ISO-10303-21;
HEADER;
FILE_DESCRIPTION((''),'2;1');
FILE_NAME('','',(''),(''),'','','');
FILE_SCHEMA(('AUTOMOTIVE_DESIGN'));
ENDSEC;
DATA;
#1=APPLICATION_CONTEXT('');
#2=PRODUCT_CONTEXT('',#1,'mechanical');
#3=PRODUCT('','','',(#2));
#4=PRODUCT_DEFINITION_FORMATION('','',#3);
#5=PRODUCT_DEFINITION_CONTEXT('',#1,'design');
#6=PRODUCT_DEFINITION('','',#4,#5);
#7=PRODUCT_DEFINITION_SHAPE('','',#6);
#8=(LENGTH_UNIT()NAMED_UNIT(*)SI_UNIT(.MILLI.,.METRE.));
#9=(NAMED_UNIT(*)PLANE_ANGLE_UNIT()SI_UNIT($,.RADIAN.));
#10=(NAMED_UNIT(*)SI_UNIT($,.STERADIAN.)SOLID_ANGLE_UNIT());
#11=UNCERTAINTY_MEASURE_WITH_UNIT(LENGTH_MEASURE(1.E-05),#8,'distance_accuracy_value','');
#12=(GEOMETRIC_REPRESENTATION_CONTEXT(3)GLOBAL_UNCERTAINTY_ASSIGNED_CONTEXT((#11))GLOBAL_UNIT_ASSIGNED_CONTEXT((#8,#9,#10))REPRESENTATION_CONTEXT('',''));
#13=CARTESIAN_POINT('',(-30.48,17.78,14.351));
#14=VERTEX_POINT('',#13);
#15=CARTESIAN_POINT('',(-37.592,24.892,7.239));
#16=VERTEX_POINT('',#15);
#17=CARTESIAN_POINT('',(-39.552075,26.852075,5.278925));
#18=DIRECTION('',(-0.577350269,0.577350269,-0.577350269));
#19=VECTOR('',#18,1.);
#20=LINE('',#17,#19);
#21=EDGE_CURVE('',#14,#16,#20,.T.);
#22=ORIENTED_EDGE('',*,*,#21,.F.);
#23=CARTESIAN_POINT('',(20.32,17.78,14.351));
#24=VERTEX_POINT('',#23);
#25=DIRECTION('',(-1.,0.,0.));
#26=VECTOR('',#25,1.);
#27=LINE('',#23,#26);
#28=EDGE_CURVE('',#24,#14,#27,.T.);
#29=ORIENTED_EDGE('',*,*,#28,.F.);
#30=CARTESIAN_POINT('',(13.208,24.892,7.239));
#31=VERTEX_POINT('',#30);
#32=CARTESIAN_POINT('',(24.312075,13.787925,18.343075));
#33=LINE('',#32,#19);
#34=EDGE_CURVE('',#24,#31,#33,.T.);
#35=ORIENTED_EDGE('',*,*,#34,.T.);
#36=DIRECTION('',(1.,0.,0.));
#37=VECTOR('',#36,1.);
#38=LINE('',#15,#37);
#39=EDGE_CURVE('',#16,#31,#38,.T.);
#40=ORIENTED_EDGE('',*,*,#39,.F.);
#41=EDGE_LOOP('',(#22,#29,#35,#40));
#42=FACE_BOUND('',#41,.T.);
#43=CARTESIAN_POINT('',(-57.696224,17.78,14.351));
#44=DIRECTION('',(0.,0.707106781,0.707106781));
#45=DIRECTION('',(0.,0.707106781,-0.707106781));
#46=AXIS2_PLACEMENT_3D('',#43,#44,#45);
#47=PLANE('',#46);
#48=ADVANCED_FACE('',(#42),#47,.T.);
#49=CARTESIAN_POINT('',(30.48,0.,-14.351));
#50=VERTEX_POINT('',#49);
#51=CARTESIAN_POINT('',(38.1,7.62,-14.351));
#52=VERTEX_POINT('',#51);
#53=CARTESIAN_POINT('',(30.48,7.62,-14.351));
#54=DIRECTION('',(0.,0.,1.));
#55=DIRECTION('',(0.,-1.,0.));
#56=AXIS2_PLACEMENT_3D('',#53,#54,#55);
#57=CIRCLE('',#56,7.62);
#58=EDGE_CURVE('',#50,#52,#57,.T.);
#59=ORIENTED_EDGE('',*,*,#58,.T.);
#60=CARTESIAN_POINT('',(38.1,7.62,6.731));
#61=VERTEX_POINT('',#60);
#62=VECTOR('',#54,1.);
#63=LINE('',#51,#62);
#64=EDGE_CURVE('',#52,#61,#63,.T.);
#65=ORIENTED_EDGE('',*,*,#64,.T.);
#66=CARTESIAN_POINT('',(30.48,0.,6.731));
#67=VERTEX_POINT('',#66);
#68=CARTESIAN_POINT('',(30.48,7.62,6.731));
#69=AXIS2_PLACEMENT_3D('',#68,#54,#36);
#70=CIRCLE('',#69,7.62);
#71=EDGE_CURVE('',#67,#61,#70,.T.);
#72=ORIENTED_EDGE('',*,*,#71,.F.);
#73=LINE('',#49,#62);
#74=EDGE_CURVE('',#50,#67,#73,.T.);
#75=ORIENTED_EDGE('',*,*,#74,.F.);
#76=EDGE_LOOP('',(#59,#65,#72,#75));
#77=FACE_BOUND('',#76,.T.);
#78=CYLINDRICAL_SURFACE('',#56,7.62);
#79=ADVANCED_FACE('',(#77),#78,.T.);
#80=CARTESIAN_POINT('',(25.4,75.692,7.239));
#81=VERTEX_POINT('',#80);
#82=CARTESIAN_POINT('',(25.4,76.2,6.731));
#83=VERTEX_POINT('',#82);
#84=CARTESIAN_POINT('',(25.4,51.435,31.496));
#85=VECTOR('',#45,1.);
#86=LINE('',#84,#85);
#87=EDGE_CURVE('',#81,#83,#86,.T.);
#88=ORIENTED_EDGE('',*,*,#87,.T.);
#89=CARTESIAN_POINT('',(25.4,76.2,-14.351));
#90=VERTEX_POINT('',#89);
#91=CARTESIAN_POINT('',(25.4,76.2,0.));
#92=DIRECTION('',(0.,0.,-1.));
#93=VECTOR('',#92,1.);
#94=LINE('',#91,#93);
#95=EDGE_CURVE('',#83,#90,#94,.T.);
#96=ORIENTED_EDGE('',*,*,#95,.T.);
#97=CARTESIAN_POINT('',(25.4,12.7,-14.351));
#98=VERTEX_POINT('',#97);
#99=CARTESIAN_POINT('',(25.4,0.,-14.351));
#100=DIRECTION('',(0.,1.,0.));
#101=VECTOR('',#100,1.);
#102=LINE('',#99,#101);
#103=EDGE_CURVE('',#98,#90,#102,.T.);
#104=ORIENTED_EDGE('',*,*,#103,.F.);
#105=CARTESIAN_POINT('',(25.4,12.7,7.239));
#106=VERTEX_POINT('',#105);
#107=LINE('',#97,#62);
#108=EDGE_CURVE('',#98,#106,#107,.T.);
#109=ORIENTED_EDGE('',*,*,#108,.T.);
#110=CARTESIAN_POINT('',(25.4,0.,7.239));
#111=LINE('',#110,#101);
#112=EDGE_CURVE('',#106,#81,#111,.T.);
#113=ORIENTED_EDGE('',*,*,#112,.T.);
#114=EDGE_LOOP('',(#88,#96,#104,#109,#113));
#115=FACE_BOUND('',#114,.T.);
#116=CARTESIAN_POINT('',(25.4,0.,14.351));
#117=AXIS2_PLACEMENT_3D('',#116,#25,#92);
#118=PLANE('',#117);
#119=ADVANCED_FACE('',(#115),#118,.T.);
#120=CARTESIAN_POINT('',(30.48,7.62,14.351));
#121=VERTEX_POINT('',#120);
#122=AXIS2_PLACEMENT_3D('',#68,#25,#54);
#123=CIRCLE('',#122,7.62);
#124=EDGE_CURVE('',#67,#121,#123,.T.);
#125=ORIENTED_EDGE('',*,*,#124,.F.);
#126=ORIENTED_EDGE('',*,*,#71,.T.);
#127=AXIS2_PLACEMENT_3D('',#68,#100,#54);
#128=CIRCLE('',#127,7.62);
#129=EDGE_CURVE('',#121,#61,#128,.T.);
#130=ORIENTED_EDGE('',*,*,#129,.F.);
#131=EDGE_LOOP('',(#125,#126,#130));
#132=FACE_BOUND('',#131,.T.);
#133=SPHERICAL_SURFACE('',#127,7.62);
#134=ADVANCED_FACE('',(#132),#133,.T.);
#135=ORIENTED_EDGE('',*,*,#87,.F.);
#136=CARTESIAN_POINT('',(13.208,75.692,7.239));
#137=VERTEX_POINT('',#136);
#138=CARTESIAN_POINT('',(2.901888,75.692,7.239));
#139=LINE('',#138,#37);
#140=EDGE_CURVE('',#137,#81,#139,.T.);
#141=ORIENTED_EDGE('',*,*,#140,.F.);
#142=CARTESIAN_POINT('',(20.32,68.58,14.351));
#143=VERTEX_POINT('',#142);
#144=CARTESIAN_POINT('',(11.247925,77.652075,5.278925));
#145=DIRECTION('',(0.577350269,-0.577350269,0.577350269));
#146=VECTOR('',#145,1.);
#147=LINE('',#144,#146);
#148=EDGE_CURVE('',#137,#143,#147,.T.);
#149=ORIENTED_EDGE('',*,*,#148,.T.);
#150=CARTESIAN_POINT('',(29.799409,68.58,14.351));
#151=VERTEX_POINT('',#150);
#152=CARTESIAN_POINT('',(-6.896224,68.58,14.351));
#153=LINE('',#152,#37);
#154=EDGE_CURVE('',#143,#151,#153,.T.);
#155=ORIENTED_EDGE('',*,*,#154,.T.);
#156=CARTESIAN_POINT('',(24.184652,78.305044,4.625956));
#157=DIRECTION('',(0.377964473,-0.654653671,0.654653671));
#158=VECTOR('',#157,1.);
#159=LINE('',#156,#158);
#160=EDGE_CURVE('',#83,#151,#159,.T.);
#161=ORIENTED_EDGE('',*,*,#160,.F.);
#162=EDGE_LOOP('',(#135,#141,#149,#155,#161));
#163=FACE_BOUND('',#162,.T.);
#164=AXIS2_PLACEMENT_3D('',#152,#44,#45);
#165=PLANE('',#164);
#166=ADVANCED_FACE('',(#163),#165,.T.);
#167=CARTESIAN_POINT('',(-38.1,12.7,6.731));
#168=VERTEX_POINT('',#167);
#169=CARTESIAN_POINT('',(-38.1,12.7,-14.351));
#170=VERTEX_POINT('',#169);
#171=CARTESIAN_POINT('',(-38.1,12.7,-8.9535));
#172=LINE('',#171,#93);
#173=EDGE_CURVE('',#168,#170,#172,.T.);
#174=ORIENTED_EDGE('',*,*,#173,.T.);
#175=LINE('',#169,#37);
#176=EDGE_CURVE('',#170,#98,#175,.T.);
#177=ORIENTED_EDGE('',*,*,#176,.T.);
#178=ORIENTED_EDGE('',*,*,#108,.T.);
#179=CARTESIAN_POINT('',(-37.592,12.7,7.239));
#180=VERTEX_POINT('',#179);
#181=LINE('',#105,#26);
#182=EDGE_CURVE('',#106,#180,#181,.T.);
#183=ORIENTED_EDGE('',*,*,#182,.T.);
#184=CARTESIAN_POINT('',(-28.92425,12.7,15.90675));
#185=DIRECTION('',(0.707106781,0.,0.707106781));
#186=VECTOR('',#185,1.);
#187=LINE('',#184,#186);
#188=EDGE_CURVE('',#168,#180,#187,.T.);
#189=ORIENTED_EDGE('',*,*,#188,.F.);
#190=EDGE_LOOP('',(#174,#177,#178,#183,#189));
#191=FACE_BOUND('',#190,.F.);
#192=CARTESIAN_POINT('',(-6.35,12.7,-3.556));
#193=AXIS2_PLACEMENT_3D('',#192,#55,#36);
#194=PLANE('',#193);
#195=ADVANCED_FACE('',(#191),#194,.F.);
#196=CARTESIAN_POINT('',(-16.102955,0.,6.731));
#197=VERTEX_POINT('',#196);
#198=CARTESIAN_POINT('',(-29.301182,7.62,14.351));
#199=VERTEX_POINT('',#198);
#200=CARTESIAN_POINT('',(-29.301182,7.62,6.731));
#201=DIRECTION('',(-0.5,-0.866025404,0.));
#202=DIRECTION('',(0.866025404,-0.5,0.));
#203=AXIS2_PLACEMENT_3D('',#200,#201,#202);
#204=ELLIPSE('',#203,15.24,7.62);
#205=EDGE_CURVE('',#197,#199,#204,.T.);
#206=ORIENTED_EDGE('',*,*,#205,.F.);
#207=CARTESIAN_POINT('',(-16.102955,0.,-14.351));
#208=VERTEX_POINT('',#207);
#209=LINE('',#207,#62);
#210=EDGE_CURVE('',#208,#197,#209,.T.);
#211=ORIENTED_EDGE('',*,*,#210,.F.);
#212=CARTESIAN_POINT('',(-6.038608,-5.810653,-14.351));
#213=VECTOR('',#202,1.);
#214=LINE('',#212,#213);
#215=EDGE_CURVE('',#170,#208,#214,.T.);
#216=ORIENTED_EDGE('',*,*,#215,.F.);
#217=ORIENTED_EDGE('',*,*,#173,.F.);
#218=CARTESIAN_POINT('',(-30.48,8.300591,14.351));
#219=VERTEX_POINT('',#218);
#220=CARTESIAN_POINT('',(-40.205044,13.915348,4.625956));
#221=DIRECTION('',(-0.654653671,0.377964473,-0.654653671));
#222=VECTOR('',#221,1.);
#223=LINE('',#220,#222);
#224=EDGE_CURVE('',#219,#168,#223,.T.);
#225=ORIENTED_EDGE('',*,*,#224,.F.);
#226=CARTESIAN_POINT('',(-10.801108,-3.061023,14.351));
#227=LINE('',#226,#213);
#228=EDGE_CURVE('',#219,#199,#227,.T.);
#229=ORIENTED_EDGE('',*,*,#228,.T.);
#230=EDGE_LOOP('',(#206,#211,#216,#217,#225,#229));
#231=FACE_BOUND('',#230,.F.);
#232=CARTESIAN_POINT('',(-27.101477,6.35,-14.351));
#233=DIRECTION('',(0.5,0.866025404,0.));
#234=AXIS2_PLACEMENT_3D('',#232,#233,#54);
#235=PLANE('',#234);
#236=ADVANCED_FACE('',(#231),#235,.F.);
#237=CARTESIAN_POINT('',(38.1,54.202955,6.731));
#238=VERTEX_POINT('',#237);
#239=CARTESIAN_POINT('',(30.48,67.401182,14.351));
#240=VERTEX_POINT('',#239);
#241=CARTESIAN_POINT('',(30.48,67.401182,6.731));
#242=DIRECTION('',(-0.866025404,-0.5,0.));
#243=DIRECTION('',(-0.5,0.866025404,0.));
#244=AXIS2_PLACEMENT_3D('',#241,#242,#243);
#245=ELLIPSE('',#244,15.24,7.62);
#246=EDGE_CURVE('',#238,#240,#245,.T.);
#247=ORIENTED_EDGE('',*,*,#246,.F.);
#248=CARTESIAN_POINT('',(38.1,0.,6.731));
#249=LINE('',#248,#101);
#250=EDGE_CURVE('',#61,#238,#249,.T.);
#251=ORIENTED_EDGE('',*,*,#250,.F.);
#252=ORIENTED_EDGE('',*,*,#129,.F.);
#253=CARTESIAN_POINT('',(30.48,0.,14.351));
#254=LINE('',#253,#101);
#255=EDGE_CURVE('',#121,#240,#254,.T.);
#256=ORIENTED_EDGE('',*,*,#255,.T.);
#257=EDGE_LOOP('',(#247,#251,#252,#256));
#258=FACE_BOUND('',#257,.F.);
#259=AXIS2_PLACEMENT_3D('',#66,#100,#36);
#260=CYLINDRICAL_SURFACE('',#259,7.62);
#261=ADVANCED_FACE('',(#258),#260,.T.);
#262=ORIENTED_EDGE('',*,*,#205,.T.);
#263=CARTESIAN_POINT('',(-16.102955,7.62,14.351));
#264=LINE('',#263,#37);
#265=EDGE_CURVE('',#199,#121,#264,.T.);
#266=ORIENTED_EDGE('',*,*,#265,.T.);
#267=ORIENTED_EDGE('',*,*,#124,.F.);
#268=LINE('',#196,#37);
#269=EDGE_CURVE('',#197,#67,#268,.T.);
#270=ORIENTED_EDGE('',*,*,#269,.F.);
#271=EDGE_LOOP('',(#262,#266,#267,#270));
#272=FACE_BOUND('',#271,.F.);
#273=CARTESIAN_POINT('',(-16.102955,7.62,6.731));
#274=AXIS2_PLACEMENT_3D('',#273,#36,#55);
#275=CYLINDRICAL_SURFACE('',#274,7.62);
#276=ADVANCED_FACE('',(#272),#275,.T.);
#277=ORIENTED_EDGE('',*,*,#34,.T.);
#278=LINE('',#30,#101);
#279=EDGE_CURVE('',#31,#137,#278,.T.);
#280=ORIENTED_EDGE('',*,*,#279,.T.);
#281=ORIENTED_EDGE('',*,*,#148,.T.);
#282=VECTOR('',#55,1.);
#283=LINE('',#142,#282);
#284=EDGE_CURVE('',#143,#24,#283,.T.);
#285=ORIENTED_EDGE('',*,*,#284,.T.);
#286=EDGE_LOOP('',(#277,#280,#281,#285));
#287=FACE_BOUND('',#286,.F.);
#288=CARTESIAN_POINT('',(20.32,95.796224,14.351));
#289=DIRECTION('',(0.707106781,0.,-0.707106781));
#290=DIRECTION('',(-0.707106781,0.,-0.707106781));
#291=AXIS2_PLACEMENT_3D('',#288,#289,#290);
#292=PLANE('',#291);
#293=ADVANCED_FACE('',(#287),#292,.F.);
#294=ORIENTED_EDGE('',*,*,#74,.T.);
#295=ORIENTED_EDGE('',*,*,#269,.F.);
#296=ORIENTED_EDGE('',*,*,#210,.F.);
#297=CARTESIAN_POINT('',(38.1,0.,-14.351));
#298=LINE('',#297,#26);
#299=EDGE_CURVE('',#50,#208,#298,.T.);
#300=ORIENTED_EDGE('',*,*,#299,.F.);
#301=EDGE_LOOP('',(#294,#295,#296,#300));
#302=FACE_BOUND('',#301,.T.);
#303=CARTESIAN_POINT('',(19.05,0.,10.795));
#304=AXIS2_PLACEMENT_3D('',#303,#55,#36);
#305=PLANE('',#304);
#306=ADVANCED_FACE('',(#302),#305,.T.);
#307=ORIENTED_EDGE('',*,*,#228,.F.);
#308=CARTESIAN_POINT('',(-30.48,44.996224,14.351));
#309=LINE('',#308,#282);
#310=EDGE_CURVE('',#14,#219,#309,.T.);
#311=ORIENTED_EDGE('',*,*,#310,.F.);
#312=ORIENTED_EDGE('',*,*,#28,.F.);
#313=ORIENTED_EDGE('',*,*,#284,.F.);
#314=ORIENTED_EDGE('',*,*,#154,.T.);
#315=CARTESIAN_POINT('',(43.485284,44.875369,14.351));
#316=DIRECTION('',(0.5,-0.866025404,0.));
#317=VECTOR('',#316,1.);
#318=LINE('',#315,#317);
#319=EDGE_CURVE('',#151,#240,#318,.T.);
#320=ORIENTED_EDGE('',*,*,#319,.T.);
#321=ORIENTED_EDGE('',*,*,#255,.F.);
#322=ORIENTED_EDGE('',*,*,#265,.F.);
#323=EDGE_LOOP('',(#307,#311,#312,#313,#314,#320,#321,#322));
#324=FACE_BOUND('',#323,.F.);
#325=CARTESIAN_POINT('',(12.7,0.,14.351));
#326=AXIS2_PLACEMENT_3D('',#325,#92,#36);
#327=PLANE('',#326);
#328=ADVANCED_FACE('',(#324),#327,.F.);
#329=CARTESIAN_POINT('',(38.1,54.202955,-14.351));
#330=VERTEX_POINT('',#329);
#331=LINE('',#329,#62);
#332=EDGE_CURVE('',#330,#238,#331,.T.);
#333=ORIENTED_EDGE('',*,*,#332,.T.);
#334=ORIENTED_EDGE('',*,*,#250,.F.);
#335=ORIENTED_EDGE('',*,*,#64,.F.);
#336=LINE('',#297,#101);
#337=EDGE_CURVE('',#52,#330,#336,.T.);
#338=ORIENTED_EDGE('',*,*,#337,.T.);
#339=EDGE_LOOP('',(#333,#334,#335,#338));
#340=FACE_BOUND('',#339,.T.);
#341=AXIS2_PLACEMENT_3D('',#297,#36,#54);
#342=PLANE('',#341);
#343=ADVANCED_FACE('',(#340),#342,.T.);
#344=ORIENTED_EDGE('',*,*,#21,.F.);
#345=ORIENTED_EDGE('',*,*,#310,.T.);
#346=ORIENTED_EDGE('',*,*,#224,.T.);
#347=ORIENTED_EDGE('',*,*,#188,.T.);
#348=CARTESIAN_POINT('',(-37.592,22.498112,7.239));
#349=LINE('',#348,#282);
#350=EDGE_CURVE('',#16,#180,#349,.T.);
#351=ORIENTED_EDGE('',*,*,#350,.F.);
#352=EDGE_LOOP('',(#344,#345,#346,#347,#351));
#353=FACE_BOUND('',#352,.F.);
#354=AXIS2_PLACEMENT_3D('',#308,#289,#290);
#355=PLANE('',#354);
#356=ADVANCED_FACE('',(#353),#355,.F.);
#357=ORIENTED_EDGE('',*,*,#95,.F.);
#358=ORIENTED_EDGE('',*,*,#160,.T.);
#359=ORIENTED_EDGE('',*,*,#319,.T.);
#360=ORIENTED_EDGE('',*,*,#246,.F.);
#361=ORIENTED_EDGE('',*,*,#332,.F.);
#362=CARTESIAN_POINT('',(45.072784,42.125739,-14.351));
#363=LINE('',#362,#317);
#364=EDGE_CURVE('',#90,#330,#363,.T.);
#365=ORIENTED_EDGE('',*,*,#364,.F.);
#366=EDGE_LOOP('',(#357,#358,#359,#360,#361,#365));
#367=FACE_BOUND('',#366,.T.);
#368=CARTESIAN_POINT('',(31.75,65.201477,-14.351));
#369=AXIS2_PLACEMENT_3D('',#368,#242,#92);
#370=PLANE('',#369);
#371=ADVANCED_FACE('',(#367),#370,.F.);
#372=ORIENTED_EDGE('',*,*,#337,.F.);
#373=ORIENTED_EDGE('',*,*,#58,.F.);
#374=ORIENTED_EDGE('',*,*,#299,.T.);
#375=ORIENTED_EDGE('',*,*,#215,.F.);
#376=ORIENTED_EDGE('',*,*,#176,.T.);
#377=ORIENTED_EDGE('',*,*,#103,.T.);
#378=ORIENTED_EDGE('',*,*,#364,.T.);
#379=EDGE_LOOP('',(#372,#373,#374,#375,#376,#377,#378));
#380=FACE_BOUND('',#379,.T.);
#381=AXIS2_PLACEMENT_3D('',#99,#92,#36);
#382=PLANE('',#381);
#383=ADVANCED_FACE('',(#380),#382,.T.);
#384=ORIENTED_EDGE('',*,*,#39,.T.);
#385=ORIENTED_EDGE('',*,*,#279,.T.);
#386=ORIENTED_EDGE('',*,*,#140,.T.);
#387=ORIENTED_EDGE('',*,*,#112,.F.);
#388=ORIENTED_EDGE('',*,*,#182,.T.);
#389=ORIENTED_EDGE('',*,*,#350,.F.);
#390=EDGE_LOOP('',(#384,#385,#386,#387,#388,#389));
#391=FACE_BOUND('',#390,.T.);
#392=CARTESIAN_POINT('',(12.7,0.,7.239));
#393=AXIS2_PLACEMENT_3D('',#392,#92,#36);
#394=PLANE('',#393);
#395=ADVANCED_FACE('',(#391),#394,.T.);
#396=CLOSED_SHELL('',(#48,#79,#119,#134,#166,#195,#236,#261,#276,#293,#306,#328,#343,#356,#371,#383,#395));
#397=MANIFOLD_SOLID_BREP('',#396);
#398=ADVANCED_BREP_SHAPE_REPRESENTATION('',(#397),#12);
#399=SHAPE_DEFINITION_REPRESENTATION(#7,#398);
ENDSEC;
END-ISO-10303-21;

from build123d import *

# Parameters (mm, degrees)
F1_DEPTH     = 12.7
F0_W         = 50.8
F0_H         = 7.112
F2_DEPTH     = 25.4
F0_W_2       = 12.7
F0_H_2       = 21.59
F3_DEPTH     = 76.2
F4_DEPTH     = 76.2
F5_SIZE2     = 21.9970452561
F5_SIZE      = 12.7
F6_SIZE2     = 21.9970452561
F6_SIZE      = 12.7
F7_R         = 7.62
F8_T1_DEPTH  = 70.3962243683
F8_T3_DEPTH  = 70.3962243683
F8_T5_DEPTH  = 51.8924487366
F8_T7_DEPTH  = 51.8924487366
F8_T13_DEPTH = 89.9924487366
F8_T17_DEPTH = 89.9924487366


# Not quite as in the source:
# - a fillet or chamfer that OpenCascade refuses, or shapes differently, is made with other operations: its cross-section is extruded or revolved along the edge and cut away or added


with BuildPart() as f1:
    # F0 (on Front) → F1 (new body)
    with BuildSketch(Plane.XZ):
        Polygon((25.4, -14.351), (25.4, 7.239), (12.7, 7.239), (-38.1, 7.239), (-38.1, -14.351), align=None)
    extrude(amount=-F1_DEPTH)

    # F0 (on Front) → F2 (join)
    with BuildSketch(Plane.XZ):
        with Locations((-12.7, 10.795)):
            Rectangle(F0_W, F0_H)
    extrude(amount=-F2_DEPTH)

    # F0 (on Front) → F3 (join)
    with BuildSketch(Plane.XZ):
        with Locations((31.75, -3.556)):
            Rectangle(F0_W_2, F0_H_2)
        with Locations((31.75, 10.795)):
            Rectangle(F0_W_2, F0_H)
    extrude(amount=-F3_DEPTH)

    # F0 (on Front) → F4 (join)
    with BuildSketch(Plane.XZ):
        with Locations((19.05, 10.795)):
            Rectangle(F0_W_2, F0_H)
    extrude(amount=-F4_DEPTH)

    # F5
    f5_edges = [f1.edges().sort_by_distance(p)[0] for p in [
        (38.1, 76.2, 0),
    ]]
    f5_side = f1.faces().sort_by_distance((29.228014, 76.2, 2.143688))[0]
    chamfer(f5_edges, length=F5_SIZE, length2=F5_SIZE2, reference=f5_side)

    # F6
    f6_edges = [f1.edges().sort_by_distance(p)[0] for p in [
        (-38.1, 0, 0),
    ]]
    chamfer(f6_edges, length=F6_SIZE, length2=F6_SIZE2)

    # F7
    f7_edges = [f1.edges().sort_by_distance(p)[0] for p in [
        (38.1, 27.101477, 14.351),
        (10.998523, 0, 14.351),
        (38.1, 0, 0),
    ]]
    fillet(f7_edges, radius=F7_R)

    # F8: chamfer of 7.62 on 4 edges, made by hand

    # F8_s2 → F8_t1 (cut)
    with BuildSketch(Plane.YZ.offset(-57.6962243683)):
        Polygon((17.78, 14.351), (25.4, 6.731), (25.4, 14.351), align=None)
    extrude(amount=F8_T1_DEPTH, mode=Mode.SUBTRACT)

    # F8_s4 → F8_t3 (cut)
    with BuildSketch(Plane.XZ.offset(-95.7962243683)):
        Polygon((20.32, 14.351), (12.7, 6.731), (12.7, 14.351), align=None)
    extrude(amount=F8_T3_DEPTH, mode=Mode.SUBTRACT)

    # F8_s6 → F8_t5 (cut)
    with BuildSketch(Plane.YZ.offset(-6.8962243683)):
        Polygon((68.58, 14.351), (76.2, 6.731), (76.2, 14.351), align=None)
    extrude(amount=F8_T5_DEPTH, mode=Mode.SUBTRACT)

    # F8_s8 → F8_t7 (cut)
    with BuildSketch(Plane.XZ.offset(-44.9962243683)):
        Polygon((-30.48, 14.351), (-38.1, 6.731), (-38.1, 14.351), align=None)
    extrude(amount=F8_T7_DEPTH, mode=Mode.SUBTRACT)


with BuildPart() as f8_tool11:
    # F8_s12 → F8_t13 (new body)
    with BuildSketch(Plane.YZ.offset(32.2962243683)):
        Polygon((17.78, 14.351), (25.4, 6.731), (25.4, 14.351), align=None)
    extrude(amount=-F8_T13_DEPTH)

    split(bisect_by=Plane.YZ.offset(12.7), keep=Keep.TOP)


with BuildPart() as f8_tool15:
    # F8_s16 → F8_t17 (new body)
    with BuildSketch(Plane.XZ.offset(-5.8037756317)):
        Polygon((20.32, 14.351), (12.7, 6.731), (12.7, 14.351), align=None)
    extrude(amount=-F8_T17_DEPTH)

    split(bisect_by=Plane.XZ.offset(-25.4), keep=Keep.TOP)


with BuildPart() as f8_tool11_1:
    add(f8_tool11.part)

    # F8_t19: intersect F8_tool15
    add(f8_tool15.part, mode=Mode.INTERSECT)


with BuildPart() as f1_1:
    add(f1.part)

    # F8_t9: cut F8_tool11
    add(f8_tool11_1.part, mode=Mode.SUBTRACT)


solid = f1_1.part
